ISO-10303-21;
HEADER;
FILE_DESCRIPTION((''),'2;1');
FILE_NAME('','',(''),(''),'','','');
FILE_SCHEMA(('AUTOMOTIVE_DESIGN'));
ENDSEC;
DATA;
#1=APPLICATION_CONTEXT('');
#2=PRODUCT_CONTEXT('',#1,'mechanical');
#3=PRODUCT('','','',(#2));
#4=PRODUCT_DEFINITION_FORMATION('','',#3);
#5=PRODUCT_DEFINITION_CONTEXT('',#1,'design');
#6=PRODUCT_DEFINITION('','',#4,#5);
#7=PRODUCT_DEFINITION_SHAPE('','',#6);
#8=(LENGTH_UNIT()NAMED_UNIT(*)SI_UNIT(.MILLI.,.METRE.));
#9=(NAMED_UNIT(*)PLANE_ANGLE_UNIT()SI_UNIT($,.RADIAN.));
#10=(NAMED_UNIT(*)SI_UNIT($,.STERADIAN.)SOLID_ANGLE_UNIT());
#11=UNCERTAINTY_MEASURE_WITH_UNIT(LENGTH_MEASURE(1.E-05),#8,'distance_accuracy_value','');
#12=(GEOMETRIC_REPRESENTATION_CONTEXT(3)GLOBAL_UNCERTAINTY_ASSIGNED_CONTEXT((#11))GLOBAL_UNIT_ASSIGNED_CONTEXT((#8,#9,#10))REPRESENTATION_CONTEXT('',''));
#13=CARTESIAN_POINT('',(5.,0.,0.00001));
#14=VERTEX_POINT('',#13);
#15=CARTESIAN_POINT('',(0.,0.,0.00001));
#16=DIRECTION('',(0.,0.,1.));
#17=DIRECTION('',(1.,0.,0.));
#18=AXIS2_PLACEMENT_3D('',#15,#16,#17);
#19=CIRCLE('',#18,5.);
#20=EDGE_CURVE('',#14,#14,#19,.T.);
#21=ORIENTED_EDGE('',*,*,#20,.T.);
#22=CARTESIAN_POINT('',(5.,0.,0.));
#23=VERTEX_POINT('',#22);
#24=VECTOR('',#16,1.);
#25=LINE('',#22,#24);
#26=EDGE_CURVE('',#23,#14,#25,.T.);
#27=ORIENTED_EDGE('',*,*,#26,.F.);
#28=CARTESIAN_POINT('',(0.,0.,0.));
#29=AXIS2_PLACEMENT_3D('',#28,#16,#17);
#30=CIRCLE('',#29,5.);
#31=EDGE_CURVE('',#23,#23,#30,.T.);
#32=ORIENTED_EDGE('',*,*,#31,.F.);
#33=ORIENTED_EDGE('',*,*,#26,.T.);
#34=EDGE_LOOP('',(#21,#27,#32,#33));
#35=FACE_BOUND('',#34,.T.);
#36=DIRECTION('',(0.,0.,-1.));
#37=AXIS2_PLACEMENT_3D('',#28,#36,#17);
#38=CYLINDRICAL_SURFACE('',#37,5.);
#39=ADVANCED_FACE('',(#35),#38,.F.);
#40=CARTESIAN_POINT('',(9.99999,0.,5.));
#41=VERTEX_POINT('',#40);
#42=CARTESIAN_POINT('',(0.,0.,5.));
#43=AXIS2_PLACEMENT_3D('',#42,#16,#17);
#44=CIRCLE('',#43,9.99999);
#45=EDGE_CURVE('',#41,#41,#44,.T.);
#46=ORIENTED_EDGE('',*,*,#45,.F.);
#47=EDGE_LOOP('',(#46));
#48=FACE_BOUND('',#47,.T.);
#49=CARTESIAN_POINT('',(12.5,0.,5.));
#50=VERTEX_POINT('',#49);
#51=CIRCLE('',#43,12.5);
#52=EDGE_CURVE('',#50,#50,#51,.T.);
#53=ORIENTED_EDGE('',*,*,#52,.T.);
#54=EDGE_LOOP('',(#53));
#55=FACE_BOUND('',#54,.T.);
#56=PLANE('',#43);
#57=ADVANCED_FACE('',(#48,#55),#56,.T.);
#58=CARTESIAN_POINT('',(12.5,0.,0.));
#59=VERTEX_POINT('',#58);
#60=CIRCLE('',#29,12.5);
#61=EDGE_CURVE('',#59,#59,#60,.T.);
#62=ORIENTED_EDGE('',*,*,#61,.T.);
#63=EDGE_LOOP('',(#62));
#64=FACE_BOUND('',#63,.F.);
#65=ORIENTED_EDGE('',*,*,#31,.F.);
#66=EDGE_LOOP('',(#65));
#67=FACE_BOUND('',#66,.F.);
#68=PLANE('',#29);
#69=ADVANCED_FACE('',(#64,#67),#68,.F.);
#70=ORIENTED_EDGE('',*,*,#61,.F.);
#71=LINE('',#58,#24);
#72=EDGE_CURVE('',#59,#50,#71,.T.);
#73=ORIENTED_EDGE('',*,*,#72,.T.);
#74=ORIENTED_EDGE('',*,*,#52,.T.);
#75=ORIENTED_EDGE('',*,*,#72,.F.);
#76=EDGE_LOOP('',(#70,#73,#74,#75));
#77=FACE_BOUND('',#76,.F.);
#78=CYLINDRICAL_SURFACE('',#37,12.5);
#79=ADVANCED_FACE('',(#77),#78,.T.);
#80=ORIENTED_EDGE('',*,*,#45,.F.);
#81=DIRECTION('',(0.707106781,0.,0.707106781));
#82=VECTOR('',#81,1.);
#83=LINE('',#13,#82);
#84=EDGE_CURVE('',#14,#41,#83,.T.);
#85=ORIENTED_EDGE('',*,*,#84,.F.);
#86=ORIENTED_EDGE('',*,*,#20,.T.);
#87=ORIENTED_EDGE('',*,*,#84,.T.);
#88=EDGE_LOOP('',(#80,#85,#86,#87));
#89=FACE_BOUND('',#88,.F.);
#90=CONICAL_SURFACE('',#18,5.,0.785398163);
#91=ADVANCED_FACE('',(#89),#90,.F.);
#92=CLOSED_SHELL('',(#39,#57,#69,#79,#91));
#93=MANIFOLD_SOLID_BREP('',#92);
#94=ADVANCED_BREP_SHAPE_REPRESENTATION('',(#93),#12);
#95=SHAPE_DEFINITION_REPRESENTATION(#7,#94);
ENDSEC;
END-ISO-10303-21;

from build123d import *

# Parameters (mm, degrees)
F0_R     = 12.5
F0_R_2   = 5
F1_DEPTH = 5
F2_SIZE  = 4.99999


# Not quite as in the source:
# - a fillet or chamfer is up to 0.001 mm smaller than in the source, because OpenCascade refuses the exact size


with BuildPart() as f1:
    # F0 (on Top) → F1 (new body)
    with BuildSketch(Plane.XY):
        Circle(F0_R)
        Circle(F0_R_2, mode=Mode.SUBTRACT)
    extrude(amount=F1_DEPTH)

    # F2 (size 5 in the source; OpenCascade refuses exactly that, so slightly less here)
    f2_edges = [f1.edges().sort_by_distance(p)[0] for p in [
        (-5, 0, 5),
    ]]
    chamfer(f2_edges, length=F2_SIZE)


solid = f1.part
